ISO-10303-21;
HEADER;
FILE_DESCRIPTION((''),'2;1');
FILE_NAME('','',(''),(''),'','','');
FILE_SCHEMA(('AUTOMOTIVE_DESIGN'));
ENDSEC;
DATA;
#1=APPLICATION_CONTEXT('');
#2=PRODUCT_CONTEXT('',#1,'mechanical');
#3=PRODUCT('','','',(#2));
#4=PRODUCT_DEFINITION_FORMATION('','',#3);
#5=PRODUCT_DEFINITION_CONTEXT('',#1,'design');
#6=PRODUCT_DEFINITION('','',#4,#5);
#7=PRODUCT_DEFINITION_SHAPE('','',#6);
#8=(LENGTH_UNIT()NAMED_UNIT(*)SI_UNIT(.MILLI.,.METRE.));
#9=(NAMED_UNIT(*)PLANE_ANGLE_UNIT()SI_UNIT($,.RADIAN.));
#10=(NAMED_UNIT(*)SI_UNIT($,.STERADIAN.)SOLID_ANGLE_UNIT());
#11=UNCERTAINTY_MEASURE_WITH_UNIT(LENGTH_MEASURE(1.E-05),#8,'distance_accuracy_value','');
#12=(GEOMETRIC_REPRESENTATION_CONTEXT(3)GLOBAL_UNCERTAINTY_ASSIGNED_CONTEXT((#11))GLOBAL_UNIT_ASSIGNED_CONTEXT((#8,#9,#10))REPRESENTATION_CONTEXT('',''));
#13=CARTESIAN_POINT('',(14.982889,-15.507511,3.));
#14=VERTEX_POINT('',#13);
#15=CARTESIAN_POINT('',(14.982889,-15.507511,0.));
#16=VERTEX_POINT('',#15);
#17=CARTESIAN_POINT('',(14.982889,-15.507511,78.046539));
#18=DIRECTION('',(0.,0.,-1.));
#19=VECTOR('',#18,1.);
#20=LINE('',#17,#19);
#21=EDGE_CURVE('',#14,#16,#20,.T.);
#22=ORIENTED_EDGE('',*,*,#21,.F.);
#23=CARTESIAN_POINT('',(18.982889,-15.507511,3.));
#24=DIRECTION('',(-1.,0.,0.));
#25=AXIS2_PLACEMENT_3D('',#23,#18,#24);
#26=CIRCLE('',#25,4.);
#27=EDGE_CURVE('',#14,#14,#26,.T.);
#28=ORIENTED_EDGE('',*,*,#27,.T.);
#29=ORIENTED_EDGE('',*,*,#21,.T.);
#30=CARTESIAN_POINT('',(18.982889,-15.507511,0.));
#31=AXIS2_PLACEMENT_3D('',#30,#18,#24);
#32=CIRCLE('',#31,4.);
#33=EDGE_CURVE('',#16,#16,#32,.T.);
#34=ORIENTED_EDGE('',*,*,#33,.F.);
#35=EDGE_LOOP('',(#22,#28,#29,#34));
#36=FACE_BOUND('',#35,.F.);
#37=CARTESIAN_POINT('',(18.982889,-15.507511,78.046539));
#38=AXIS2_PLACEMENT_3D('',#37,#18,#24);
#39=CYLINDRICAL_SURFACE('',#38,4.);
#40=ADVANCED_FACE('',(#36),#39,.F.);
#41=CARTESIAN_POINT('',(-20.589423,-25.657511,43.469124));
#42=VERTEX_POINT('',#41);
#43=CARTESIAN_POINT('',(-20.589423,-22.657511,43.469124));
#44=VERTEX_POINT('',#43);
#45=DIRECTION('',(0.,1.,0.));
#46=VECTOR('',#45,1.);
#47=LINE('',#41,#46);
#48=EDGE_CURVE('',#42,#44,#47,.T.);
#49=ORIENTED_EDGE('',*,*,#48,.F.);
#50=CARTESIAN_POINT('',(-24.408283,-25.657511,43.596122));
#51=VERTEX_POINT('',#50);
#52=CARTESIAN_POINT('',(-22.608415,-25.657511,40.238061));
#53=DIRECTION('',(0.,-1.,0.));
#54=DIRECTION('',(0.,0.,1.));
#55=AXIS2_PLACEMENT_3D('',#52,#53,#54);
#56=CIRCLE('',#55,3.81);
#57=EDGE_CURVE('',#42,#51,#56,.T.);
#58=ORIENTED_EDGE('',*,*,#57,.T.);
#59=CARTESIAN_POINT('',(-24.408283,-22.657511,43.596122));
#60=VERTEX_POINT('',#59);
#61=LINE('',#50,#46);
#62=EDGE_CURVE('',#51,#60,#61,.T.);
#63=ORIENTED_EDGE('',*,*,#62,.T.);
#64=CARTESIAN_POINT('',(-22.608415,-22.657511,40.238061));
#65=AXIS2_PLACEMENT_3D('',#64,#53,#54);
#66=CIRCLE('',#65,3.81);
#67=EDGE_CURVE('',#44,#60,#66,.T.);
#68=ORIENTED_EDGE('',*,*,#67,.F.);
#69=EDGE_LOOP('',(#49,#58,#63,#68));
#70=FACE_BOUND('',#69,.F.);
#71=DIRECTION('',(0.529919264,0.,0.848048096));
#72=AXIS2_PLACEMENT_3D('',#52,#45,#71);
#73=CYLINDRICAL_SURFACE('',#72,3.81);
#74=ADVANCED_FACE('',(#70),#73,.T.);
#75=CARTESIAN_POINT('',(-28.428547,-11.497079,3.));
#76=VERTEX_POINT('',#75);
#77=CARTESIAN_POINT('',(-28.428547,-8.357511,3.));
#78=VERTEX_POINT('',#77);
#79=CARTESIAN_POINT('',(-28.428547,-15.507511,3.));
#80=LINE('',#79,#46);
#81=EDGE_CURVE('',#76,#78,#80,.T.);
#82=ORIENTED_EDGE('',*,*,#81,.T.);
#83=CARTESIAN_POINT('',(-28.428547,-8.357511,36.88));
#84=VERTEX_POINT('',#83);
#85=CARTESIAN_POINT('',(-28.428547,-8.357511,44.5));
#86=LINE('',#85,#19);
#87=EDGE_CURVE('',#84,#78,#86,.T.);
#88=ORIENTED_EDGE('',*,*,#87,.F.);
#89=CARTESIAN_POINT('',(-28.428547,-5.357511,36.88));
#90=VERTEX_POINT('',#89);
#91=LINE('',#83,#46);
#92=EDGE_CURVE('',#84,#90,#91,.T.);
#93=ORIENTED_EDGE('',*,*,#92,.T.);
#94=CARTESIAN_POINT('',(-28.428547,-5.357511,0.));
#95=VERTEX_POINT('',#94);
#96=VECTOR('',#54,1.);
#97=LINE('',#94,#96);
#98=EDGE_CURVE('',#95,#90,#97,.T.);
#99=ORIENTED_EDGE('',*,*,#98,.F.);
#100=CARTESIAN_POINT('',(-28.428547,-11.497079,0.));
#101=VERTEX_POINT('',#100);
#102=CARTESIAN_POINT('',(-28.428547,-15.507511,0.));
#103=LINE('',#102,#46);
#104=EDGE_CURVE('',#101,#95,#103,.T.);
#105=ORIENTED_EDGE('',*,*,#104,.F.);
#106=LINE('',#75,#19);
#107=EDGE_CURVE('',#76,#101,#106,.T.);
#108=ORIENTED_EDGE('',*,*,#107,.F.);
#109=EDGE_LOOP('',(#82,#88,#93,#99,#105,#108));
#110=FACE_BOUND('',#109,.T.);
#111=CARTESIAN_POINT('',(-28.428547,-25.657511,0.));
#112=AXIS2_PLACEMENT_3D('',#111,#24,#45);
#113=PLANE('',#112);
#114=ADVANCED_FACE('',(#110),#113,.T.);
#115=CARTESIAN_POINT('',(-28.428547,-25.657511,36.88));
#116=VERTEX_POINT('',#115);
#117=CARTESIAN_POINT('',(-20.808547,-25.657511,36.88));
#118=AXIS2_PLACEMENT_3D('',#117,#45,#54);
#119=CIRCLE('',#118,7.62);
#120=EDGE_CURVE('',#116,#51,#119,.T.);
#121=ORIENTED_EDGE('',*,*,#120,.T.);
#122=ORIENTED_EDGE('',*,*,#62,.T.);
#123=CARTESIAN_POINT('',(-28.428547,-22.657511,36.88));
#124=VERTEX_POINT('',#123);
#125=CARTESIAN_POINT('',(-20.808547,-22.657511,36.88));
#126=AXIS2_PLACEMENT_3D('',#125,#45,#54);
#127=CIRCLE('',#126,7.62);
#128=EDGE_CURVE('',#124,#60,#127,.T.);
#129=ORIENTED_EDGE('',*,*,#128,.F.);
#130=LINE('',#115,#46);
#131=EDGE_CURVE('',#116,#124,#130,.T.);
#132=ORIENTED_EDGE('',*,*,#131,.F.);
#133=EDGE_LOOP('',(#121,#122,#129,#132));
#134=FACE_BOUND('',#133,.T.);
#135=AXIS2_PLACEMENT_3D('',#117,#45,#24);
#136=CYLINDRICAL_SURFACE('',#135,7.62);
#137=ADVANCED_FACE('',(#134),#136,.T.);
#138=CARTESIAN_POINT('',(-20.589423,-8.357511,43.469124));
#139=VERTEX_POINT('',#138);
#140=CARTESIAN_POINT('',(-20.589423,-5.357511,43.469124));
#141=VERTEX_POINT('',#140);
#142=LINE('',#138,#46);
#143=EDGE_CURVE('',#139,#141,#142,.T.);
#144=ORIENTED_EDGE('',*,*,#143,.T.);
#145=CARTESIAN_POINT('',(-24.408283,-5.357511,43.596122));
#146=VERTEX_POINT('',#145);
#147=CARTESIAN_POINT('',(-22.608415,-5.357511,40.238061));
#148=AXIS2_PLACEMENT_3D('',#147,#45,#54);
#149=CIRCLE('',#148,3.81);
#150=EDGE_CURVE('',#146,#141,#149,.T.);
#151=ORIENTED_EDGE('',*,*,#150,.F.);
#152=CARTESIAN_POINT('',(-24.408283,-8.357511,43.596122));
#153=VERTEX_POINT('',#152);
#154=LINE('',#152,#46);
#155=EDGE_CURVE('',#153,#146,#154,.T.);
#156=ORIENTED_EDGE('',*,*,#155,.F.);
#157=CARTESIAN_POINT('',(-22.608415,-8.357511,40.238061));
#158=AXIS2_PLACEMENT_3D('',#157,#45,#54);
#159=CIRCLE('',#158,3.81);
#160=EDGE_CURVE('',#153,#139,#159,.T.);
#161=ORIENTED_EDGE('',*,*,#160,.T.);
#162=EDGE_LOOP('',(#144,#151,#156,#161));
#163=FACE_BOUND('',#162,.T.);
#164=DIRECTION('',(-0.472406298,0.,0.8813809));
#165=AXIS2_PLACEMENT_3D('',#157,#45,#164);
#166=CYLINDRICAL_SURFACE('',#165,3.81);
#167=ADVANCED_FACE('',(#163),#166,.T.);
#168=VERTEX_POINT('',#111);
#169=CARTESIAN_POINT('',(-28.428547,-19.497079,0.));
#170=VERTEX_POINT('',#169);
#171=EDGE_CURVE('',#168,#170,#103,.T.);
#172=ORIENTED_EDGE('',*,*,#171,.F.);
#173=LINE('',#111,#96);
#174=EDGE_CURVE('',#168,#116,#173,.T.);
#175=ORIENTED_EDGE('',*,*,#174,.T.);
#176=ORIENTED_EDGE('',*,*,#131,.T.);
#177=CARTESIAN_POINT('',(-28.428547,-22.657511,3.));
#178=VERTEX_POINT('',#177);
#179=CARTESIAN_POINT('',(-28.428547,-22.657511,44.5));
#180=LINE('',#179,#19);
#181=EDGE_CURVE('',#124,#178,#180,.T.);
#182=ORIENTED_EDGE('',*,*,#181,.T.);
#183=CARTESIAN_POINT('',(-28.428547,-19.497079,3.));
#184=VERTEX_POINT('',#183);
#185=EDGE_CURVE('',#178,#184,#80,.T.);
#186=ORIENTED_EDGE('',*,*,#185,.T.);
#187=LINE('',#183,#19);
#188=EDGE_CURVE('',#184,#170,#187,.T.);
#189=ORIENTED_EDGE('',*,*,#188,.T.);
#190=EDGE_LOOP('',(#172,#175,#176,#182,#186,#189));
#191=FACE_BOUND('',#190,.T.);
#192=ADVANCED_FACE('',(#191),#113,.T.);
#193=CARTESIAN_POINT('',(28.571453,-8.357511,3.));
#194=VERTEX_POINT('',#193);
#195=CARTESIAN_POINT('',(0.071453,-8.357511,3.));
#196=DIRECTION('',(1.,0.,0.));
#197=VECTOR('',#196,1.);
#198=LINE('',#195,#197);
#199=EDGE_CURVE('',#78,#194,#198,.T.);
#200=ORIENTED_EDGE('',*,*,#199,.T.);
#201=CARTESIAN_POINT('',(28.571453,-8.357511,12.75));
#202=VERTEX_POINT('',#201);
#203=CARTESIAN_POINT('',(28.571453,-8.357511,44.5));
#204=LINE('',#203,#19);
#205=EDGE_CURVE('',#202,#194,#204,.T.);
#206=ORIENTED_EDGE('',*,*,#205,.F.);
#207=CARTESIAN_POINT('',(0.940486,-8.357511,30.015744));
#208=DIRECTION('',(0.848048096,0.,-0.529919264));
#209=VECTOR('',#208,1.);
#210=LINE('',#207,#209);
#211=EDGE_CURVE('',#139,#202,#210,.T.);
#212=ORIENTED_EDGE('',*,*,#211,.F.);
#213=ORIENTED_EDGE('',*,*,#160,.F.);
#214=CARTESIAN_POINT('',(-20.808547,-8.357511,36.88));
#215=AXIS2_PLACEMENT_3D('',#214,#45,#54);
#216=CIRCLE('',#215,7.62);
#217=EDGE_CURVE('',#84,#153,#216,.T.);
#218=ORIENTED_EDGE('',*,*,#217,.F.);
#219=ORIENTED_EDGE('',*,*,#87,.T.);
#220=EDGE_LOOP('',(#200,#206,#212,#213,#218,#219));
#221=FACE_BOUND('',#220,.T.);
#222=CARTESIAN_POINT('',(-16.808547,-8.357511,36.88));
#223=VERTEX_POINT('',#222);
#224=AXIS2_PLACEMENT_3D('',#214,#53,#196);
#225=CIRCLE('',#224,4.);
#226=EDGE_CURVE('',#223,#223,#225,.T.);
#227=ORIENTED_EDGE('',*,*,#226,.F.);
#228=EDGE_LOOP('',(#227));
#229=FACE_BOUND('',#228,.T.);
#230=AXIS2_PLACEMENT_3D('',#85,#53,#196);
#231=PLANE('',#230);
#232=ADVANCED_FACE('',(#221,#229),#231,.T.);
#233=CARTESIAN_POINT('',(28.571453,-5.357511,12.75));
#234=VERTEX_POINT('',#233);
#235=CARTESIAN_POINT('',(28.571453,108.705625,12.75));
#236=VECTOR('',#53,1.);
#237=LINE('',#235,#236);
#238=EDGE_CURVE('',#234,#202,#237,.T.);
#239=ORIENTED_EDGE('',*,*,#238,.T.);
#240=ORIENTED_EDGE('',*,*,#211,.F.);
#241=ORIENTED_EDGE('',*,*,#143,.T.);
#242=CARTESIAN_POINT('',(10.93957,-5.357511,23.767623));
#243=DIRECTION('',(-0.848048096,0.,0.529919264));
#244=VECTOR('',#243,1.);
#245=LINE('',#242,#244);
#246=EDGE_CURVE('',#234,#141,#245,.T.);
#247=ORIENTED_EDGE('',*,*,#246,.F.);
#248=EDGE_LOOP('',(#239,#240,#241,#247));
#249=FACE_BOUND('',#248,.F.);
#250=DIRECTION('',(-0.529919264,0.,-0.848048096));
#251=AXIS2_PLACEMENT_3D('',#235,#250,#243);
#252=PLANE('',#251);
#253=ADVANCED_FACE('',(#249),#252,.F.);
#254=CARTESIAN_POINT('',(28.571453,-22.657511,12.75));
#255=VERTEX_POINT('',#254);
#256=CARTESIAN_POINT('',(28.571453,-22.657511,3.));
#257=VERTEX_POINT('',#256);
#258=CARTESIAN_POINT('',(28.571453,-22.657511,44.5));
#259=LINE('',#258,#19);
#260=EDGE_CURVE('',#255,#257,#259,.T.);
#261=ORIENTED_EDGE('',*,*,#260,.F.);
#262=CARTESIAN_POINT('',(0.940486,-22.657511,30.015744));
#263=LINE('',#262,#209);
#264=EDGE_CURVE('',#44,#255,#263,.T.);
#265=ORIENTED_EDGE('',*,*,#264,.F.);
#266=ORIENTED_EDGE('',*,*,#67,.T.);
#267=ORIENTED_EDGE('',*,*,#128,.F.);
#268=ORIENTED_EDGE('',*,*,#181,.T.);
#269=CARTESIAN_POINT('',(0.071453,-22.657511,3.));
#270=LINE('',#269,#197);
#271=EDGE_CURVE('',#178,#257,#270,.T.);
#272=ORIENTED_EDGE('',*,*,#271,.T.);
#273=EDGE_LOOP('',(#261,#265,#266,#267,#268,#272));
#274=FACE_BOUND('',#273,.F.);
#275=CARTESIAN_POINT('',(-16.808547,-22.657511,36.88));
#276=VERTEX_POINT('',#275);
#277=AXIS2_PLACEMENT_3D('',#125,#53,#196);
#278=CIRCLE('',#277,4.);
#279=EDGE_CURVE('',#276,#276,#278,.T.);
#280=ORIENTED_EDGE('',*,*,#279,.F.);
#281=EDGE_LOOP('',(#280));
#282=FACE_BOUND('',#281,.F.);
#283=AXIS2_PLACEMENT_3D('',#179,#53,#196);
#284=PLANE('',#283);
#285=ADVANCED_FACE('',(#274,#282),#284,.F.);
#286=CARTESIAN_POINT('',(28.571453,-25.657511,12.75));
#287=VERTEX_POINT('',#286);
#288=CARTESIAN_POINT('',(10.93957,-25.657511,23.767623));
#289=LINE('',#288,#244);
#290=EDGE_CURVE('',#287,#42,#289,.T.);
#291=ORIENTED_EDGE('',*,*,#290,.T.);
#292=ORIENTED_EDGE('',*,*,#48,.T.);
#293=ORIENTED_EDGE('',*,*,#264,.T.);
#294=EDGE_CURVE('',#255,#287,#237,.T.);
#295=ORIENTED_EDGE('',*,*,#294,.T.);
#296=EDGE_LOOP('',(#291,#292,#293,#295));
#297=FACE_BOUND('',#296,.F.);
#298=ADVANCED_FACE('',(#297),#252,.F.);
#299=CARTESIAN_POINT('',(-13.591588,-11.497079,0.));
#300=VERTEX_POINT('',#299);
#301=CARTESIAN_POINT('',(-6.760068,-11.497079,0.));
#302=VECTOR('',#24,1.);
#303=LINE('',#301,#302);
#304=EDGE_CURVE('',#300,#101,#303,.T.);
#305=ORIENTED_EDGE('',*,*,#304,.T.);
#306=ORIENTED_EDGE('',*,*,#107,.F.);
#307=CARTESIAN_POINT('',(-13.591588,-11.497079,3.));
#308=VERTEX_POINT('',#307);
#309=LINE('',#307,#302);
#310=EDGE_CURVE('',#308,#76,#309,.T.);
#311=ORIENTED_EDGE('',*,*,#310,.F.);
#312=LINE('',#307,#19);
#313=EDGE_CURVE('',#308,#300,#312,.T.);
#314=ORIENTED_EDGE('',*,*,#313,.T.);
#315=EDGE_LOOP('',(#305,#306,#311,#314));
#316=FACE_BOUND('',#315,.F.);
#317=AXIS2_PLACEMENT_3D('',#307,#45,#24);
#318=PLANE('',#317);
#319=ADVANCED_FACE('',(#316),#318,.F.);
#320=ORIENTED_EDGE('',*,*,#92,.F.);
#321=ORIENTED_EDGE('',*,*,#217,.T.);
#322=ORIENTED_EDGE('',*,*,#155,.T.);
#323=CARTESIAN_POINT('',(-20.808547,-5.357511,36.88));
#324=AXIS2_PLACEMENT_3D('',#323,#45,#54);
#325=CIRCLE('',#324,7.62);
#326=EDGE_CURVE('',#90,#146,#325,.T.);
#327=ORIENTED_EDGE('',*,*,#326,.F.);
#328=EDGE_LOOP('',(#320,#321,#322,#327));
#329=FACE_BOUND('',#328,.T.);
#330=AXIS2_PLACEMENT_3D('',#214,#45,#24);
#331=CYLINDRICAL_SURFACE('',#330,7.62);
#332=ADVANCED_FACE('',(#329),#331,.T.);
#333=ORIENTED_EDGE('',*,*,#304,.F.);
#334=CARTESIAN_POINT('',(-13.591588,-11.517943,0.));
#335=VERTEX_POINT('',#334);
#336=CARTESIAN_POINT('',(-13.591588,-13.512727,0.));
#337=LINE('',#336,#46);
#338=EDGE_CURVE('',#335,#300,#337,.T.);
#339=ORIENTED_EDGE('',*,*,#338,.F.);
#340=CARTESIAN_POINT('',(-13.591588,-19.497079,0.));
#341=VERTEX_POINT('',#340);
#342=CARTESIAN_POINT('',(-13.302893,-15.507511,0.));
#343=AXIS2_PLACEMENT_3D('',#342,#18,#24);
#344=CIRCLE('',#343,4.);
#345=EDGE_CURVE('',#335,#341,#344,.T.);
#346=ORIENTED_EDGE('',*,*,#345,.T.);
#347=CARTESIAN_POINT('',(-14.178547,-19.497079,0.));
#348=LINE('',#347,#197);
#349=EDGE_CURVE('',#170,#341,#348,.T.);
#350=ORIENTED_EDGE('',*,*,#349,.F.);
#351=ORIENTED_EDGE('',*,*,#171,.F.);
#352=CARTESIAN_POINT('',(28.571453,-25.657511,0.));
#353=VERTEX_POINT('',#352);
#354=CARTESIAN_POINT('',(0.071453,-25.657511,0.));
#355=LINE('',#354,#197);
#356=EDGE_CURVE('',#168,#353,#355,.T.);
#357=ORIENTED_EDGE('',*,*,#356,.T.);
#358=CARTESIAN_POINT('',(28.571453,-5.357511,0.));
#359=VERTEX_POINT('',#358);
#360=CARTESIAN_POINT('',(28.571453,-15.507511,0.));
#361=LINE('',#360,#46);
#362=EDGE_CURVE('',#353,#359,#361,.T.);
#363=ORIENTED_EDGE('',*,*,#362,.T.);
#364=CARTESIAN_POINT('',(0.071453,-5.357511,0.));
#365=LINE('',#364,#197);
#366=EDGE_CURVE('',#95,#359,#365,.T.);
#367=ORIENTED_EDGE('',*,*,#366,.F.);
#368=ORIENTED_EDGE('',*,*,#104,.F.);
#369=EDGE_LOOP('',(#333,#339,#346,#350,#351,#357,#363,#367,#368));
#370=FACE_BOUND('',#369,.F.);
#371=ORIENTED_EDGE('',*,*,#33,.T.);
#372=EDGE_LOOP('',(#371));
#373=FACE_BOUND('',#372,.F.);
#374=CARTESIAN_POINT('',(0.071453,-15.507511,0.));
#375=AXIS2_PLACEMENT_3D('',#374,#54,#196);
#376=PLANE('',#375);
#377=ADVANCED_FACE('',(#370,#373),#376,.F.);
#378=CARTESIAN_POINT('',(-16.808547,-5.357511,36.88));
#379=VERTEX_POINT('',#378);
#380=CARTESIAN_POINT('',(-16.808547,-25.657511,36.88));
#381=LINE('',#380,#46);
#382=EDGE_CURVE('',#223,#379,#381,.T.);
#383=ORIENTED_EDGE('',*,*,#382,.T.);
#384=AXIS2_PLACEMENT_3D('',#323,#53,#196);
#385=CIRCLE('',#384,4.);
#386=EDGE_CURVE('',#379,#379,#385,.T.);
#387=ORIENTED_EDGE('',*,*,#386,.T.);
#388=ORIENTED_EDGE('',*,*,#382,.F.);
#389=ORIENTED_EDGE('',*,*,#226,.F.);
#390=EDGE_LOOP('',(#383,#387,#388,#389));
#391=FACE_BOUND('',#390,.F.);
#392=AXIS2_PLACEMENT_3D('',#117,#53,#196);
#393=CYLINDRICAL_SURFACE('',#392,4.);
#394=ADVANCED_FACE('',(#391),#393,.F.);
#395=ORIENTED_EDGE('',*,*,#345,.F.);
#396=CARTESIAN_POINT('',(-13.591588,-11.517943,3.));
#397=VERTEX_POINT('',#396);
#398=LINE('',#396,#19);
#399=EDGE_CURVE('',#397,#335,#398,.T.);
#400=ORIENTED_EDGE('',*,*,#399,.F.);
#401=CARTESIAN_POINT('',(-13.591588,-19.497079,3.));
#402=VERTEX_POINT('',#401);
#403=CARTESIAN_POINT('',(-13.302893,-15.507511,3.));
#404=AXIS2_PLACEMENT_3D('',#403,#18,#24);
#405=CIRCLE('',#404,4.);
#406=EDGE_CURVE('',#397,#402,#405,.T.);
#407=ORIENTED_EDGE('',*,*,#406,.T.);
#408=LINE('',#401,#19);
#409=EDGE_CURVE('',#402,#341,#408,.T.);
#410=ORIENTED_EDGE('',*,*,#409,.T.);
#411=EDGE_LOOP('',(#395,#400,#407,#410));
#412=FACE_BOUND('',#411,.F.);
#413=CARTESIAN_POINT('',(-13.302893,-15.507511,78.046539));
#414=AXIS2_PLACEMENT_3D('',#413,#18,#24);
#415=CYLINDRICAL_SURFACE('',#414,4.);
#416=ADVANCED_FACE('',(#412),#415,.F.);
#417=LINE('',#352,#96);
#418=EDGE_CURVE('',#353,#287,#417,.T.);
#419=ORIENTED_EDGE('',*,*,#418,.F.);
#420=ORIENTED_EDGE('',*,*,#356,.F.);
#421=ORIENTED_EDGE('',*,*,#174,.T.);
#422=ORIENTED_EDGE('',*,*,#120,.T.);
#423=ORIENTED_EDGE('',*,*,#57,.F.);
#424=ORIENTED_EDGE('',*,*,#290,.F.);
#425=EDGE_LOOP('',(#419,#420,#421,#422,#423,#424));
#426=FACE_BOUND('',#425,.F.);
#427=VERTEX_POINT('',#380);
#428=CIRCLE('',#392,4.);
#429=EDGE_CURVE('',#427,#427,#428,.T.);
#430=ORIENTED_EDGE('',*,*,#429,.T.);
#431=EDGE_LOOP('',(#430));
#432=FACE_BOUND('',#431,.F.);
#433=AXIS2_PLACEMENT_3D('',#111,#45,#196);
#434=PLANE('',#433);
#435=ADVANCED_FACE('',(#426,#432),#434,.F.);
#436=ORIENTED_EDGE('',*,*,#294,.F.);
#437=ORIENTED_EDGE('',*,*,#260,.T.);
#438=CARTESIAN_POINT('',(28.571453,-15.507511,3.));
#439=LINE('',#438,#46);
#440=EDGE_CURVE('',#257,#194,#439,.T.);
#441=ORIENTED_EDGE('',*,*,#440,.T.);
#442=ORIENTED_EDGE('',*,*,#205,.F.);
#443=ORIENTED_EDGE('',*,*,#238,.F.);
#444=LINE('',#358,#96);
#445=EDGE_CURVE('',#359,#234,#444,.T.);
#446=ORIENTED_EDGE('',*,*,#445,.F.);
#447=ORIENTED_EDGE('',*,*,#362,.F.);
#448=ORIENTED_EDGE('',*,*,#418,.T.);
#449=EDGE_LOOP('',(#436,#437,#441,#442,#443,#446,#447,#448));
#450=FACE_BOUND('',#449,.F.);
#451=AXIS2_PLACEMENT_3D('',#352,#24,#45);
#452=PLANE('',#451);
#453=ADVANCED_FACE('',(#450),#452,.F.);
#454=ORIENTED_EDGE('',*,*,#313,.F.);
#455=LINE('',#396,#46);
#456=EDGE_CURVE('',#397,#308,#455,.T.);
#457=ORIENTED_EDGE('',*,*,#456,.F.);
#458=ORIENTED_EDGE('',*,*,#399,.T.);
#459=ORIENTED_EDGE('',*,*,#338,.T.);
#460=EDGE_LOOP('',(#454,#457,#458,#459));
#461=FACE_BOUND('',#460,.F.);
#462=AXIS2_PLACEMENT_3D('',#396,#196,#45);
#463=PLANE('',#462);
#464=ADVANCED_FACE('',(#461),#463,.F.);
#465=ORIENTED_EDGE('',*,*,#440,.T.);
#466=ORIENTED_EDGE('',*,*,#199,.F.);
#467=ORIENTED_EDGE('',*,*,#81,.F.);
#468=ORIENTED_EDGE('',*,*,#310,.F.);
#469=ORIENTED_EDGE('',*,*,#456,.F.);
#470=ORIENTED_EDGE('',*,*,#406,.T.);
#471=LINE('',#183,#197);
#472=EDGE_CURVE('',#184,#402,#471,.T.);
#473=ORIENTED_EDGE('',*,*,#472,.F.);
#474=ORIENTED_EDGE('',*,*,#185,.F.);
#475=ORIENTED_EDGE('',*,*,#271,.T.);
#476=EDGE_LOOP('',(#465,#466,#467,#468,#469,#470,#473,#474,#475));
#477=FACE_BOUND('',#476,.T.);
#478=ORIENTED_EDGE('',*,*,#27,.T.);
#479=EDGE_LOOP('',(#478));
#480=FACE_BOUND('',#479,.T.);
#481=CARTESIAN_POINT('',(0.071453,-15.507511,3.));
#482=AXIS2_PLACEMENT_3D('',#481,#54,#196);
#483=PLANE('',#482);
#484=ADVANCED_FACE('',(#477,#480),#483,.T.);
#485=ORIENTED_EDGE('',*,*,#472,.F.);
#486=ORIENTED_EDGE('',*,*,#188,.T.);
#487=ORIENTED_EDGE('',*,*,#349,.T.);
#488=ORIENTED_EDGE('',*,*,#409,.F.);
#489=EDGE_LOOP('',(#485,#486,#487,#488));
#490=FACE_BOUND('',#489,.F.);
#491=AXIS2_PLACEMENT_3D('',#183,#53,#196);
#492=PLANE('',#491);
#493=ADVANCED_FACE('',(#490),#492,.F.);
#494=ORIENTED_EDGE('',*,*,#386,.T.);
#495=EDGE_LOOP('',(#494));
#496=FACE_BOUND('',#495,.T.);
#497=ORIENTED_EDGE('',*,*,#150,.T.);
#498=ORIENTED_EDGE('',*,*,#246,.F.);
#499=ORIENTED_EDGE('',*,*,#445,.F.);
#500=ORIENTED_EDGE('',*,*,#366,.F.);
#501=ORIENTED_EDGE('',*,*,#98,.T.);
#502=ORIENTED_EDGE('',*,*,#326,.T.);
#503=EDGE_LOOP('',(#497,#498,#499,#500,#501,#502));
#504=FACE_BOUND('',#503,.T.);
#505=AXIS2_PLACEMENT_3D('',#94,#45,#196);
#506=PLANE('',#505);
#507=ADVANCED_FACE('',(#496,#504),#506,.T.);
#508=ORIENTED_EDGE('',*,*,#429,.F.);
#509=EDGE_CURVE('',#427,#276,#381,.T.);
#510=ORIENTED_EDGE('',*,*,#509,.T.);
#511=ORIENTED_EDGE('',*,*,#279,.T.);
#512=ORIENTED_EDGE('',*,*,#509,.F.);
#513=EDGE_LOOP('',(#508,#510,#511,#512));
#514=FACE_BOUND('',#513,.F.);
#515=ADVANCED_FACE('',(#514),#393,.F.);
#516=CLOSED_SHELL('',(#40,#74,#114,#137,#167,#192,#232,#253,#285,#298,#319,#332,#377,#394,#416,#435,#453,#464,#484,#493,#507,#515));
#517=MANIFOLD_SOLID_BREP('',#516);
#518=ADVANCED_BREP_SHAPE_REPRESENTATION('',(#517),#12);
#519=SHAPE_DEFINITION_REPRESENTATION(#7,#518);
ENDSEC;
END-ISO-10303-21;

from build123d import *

# Parameters (mm, degrees)
F0_W        = 57
F0_H        = 20.3
F1_DEPTH    = 44.5
F2_W        = 57
F2_H        = 14.3
F3_DEPTH    = 41.5
F4_R        = 7.62
F5_T1_DEPTH = 265.7262717185
F7_R        = 4
F8_DEPTH    = 25.4
F10_D       = 8
F12_D       = 8
F14_DEPTH   = 25.4
F15_R       = 3.81


# Not quite as in the source:
# - a fillet or chamfer that OpenCascade refuses, or shapes differently, is made with other operations: its cross-section is extruded or revolved along the edge and cut away or added
# - a feature of the source that left no trace in its solid (it failed there, or was rolled back) is left out


with BuildPart() as f1:
    # F0 (on Top) → F1 (new body)
    with BuildSketch(Plane.XY):
        with Locations((0.0714529306, -15.5075108656)):
            Rectangle(F0_W, F0_H)
    extrude(amount=F1_DEPTH)

    # F2 (on face) → F3 (cut)
    with BuildSketch(Plane.XY.offset(44.5)):
        with Locations((0.0714529306, -15.5075108656)):
            Rectangle(F2_W, F2_H)
    extrude(amount=-F3_DEPTH, mode=Mode.SUBTRACT)

    # F4
    f4_edges = [f1.edges().sort_by_distance(p)[0] for p in [
        (-28.428547, -24.157511, 44.5),
        (-28.428547, -6.857511, 44.5),
    ]]
    fillet(f4_edges, radius=F4_R)

    # F5: chamfer of 31.75 x 50.8106212971 on 1 edges, made by hand

    # F5_s2 → F5_t1 (cut)
    with BuildSketch(Plane.XZ.offset(-108.7056249936)):
        Polygon((28.5714529306, 12.75), (-22.2391683665, 44.5), (28.5714529306, 44.5), align=None)
    extrude(amount=F5_T1_DEPTH, mode=Mode.SUBTRACT)

    # F7 (on face) → F8 (cut)
    with BuildSketch(Plane.XZ.offset(25.6575108656)):
        with Locations((-20.8085470694, 36.88)):
            Circle(F7_R)
    extrude(amount=-F8_DEPTH, mode=Mode.SUBTRACT)

    # F10 (through all)
    with Locations(Plane.XY.offset(3)):
        with Locations((18.9828891307, -15.5075108656)):
            Hole(F10_D / 2)

    # F12 (through all)
    with Locations(Plane.XY.offset(3)):
        with Locations((-13.3028933778, -15.5075108656)):
            Hole(F12_D / 2)

    # F13 (on face) → F14 (cut)
    with BuildSketch(Plane.XY.offset(3)):
        with BuildLine():
            Line((-28.4285470694, -19.4970791591), (-13.5915884278, -19.4970791591))
            ThreePointArc((-13.5915884278, -19.4970791591), (-17.3028933778, -15.5075108656), (-13.5915884278, -11.5179425722))
            Line((-13.5915884278, -11.5179425722), (-13.5915884278, -11.4970791591))
            Line((-13.5915884278, -11.4970791591), (-28.4285470694, -11.4970791591))
            Line((-28.4285470694, -11.4970791591), (-28.4285470694, -19.4970791591))
        make_face()
    extrude(amount=-F14_DEPTH, mode=Mode.SUBTRACT)

    # F15
    f15_edges = [f1.edges().sort_by_distance(p)[0] for p in [
        (-22.070718, -24.157511, 44.39474),
        (-22.070718, -6.857511, 44.39474),
    ]]
    fillet(f15_edges, radius=F15_R)


solid = f1.part
